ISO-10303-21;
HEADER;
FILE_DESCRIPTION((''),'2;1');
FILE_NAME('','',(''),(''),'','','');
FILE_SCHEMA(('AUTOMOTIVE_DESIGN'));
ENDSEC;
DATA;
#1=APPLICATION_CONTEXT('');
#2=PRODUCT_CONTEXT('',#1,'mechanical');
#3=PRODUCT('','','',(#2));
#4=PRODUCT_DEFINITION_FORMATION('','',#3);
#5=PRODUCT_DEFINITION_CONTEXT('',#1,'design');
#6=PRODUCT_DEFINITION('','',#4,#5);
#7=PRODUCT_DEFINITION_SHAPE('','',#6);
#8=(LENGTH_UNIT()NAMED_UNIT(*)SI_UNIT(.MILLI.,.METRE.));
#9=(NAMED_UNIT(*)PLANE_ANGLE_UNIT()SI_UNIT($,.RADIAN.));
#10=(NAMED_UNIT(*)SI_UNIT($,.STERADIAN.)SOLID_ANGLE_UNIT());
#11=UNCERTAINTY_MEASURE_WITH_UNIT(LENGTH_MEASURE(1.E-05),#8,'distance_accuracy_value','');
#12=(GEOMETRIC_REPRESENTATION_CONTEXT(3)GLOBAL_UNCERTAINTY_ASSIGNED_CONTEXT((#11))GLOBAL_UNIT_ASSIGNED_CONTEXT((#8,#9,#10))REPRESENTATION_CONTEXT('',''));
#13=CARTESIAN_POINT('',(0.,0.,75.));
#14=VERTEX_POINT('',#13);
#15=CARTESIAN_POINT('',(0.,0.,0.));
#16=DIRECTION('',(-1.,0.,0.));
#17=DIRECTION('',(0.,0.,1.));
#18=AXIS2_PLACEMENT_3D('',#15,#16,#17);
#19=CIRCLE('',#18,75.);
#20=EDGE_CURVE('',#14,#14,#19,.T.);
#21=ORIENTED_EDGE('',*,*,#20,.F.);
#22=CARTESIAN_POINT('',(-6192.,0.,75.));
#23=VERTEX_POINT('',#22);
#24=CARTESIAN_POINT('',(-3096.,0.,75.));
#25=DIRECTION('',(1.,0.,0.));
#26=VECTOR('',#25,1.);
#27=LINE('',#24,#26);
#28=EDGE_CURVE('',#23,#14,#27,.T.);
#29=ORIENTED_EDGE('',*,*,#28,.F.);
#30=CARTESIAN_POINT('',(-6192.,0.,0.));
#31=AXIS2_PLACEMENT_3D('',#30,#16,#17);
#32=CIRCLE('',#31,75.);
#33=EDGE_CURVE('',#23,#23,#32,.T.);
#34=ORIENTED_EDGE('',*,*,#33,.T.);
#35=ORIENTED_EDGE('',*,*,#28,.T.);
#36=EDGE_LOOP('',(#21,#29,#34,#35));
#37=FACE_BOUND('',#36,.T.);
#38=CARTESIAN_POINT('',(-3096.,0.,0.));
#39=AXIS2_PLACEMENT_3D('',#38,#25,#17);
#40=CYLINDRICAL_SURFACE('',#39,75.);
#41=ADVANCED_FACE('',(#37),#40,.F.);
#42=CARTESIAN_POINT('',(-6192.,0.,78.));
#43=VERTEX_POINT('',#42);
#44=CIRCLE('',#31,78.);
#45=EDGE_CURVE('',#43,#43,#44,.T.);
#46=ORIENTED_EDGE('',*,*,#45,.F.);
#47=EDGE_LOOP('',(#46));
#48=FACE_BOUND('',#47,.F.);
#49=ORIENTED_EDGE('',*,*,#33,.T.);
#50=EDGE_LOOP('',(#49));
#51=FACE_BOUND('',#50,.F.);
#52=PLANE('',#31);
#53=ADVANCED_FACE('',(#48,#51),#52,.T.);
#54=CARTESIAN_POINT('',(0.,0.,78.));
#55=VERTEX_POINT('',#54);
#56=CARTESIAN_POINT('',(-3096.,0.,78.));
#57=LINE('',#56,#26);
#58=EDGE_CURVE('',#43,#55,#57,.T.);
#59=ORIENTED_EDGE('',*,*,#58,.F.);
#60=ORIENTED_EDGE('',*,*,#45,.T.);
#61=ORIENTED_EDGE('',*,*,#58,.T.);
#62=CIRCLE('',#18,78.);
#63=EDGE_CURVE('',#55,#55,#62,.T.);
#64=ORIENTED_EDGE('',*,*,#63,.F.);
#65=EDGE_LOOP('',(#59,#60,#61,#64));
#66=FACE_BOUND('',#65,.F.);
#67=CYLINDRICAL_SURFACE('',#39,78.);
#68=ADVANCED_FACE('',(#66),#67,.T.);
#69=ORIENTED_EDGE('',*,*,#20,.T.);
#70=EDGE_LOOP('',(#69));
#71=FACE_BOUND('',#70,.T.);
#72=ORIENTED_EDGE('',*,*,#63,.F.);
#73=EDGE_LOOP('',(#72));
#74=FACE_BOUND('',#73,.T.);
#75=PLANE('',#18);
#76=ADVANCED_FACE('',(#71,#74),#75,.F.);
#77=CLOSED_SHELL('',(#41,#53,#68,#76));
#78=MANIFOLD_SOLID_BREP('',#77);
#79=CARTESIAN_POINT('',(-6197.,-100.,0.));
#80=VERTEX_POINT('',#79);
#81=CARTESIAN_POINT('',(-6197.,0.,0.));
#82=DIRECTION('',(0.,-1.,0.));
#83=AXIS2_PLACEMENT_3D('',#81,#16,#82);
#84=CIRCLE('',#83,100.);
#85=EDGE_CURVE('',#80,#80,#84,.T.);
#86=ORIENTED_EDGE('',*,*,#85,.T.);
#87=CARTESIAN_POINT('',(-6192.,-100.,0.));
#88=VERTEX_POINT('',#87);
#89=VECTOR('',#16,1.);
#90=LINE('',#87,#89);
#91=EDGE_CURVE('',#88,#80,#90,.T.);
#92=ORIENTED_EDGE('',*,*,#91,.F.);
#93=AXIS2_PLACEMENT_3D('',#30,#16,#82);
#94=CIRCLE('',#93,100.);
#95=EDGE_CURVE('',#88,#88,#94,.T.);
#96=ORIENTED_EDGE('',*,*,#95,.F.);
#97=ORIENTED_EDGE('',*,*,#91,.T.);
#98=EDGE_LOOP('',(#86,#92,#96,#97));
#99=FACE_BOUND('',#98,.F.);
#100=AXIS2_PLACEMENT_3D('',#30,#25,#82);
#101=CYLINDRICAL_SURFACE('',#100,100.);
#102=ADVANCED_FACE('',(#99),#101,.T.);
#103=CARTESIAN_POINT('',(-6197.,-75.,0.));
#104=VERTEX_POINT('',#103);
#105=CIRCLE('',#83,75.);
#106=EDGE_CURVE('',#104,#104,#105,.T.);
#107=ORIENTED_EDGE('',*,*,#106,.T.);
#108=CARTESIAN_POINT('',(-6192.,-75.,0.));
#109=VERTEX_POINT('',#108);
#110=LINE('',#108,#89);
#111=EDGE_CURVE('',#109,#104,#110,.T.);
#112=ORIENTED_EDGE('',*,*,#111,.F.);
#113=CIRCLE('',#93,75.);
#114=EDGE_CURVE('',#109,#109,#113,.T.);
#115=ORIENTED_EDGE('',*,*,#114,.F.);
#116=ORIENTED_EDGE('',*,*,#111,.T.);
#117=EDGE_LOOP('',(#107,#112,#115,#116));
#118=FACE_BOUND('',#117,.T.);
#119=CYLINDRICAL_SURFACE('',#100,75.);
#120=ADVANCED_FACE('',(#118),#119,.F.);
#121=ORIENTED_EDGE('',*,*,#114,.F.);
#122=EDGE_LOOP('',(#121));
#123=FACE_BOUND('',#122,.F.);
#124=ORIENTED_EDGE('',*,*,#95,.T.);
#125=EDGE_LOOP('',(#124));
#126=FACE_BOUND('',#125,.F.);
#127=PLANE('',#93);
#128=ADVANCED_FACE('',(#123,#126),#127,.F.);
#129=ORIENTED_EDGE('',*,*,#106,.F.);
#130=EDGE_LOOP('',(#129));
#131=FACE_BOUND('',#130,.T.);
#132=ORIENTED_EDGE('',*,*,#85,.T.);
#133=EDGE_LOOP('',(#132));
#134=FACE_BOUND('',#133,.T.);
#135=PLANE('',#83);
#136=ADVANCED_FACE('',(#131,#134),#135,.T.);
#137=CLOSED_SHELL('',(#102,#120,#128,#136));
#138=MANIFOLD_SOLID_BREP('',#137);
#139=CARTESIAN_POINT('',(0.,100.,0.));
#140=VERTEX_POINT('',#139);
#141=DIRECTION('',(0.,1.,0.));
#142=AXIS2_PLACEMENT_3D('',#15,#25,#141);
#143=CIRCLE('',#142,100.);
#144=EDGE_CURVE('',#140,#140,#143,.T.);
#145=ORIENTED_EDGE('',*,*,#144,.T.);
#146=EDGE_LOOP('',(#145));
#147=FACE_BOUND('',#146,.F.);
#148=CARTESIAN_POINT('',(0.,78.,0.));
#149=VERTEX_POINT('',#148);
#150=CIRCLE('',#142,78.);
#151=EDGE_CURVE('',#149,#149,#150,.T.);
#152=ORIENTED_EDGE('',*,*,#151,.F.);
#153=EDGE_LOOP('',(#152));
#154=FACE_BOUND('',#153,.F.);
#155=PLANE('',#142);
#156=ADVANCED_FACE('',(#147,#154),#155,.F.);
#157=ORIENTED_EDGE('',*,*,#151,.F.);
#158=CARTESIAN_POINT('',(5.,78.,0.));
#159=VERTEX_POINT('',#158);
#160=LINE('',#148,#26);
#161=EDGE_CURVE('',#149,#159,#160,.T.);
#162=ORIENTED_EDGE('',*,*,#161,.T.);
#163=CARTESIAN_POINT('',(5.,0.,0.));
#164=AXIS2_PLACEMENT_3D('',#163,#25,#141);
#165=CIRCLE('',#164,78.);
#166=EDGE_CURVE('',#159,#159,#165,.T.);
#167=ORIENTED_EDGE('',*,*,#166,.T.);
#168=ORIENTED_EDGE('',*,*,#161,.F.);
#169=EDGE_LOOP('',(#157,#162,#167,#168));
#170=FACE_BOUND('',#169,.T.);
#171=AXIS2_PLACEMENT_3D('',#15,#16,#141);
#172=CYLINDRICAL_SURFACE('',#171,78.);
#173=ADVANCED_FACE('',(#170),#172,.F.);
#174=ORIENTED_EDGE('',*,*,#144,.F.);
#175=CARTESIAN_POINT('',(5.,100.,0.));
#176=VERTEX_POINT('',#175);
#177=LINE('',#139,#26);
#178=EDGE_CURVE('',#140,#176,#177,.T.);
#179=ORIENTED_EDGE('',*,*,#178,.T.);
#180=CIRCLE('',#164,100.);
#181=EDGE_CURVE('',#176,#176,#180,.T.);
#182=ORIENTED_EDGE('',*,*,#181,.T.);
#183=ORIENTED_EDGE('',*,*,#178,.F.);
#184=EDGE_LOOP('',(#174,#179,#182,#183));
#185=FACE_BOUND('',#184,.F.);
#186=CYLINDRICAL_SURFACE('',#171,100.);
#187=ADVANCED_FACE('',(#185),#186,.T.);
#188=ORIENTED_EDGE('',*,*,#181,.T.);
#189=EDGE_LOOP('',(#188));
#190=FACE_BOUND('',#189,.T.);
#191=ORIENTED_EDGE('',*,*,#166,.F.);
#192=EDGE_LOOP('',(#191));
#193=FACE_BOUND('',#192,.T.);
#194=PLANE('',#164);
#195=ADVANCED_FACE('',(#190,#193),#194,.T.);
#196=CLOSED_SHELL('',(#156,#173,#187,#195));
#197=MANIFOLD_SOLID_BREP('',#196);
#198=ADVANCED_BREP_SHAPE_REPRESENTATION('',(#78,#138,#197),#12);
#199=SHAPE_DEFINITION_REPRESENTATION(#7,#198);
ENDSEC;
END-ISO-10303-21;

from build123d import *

# Parameters (mm, degrees)
F0_W     = 6192
F0_H     = 3
F2_R     = 100
F2_R_2   = 78
F2_R_3   = 75
F3_DEPTH = 5
F4_R     = 100
F4_R_2   = 78
F5_DEPTH = 5


with BuildPart() as f1:
    # F0 (on Front) → F1 (revolve)
    with BuildSketch(Plane.XZ):
        with Locations((-3096, 76.5)):
            Rectangle(F0_W, F0_H)
    revolve(axis=Axis((-3096, 0, 0), (-1, 0, 0)))


with BuildPart() as f3:
    # F2 (on face) → F3 (new body)
    with BuildSketch(Plane(origin=(-6192, 0, 0), x_dir=(0, -1, 0), z_dir=(-1, 0, 0))):
        Circle(F2_R)
        Circle(F2_R_2, mode=Mode.SUBTRACT)
        Circle(F2_R_2)
        Circle(F2_R_3, mode=Mode.SUBTRACT)
    extrude(amount=F3_DEPTH)


with BuildPart() as f5:
    # F4 (on face) → F5 (new body)
    with BuildSketch(Plane.YZ):
        Circle(F4_R)
        Circle(F4_R_2, mode=Mode.SUBTRACT)
    extrude(amount=F5_DEPTH)


solid = Compound([f1.part, f3.part, f5.part])
